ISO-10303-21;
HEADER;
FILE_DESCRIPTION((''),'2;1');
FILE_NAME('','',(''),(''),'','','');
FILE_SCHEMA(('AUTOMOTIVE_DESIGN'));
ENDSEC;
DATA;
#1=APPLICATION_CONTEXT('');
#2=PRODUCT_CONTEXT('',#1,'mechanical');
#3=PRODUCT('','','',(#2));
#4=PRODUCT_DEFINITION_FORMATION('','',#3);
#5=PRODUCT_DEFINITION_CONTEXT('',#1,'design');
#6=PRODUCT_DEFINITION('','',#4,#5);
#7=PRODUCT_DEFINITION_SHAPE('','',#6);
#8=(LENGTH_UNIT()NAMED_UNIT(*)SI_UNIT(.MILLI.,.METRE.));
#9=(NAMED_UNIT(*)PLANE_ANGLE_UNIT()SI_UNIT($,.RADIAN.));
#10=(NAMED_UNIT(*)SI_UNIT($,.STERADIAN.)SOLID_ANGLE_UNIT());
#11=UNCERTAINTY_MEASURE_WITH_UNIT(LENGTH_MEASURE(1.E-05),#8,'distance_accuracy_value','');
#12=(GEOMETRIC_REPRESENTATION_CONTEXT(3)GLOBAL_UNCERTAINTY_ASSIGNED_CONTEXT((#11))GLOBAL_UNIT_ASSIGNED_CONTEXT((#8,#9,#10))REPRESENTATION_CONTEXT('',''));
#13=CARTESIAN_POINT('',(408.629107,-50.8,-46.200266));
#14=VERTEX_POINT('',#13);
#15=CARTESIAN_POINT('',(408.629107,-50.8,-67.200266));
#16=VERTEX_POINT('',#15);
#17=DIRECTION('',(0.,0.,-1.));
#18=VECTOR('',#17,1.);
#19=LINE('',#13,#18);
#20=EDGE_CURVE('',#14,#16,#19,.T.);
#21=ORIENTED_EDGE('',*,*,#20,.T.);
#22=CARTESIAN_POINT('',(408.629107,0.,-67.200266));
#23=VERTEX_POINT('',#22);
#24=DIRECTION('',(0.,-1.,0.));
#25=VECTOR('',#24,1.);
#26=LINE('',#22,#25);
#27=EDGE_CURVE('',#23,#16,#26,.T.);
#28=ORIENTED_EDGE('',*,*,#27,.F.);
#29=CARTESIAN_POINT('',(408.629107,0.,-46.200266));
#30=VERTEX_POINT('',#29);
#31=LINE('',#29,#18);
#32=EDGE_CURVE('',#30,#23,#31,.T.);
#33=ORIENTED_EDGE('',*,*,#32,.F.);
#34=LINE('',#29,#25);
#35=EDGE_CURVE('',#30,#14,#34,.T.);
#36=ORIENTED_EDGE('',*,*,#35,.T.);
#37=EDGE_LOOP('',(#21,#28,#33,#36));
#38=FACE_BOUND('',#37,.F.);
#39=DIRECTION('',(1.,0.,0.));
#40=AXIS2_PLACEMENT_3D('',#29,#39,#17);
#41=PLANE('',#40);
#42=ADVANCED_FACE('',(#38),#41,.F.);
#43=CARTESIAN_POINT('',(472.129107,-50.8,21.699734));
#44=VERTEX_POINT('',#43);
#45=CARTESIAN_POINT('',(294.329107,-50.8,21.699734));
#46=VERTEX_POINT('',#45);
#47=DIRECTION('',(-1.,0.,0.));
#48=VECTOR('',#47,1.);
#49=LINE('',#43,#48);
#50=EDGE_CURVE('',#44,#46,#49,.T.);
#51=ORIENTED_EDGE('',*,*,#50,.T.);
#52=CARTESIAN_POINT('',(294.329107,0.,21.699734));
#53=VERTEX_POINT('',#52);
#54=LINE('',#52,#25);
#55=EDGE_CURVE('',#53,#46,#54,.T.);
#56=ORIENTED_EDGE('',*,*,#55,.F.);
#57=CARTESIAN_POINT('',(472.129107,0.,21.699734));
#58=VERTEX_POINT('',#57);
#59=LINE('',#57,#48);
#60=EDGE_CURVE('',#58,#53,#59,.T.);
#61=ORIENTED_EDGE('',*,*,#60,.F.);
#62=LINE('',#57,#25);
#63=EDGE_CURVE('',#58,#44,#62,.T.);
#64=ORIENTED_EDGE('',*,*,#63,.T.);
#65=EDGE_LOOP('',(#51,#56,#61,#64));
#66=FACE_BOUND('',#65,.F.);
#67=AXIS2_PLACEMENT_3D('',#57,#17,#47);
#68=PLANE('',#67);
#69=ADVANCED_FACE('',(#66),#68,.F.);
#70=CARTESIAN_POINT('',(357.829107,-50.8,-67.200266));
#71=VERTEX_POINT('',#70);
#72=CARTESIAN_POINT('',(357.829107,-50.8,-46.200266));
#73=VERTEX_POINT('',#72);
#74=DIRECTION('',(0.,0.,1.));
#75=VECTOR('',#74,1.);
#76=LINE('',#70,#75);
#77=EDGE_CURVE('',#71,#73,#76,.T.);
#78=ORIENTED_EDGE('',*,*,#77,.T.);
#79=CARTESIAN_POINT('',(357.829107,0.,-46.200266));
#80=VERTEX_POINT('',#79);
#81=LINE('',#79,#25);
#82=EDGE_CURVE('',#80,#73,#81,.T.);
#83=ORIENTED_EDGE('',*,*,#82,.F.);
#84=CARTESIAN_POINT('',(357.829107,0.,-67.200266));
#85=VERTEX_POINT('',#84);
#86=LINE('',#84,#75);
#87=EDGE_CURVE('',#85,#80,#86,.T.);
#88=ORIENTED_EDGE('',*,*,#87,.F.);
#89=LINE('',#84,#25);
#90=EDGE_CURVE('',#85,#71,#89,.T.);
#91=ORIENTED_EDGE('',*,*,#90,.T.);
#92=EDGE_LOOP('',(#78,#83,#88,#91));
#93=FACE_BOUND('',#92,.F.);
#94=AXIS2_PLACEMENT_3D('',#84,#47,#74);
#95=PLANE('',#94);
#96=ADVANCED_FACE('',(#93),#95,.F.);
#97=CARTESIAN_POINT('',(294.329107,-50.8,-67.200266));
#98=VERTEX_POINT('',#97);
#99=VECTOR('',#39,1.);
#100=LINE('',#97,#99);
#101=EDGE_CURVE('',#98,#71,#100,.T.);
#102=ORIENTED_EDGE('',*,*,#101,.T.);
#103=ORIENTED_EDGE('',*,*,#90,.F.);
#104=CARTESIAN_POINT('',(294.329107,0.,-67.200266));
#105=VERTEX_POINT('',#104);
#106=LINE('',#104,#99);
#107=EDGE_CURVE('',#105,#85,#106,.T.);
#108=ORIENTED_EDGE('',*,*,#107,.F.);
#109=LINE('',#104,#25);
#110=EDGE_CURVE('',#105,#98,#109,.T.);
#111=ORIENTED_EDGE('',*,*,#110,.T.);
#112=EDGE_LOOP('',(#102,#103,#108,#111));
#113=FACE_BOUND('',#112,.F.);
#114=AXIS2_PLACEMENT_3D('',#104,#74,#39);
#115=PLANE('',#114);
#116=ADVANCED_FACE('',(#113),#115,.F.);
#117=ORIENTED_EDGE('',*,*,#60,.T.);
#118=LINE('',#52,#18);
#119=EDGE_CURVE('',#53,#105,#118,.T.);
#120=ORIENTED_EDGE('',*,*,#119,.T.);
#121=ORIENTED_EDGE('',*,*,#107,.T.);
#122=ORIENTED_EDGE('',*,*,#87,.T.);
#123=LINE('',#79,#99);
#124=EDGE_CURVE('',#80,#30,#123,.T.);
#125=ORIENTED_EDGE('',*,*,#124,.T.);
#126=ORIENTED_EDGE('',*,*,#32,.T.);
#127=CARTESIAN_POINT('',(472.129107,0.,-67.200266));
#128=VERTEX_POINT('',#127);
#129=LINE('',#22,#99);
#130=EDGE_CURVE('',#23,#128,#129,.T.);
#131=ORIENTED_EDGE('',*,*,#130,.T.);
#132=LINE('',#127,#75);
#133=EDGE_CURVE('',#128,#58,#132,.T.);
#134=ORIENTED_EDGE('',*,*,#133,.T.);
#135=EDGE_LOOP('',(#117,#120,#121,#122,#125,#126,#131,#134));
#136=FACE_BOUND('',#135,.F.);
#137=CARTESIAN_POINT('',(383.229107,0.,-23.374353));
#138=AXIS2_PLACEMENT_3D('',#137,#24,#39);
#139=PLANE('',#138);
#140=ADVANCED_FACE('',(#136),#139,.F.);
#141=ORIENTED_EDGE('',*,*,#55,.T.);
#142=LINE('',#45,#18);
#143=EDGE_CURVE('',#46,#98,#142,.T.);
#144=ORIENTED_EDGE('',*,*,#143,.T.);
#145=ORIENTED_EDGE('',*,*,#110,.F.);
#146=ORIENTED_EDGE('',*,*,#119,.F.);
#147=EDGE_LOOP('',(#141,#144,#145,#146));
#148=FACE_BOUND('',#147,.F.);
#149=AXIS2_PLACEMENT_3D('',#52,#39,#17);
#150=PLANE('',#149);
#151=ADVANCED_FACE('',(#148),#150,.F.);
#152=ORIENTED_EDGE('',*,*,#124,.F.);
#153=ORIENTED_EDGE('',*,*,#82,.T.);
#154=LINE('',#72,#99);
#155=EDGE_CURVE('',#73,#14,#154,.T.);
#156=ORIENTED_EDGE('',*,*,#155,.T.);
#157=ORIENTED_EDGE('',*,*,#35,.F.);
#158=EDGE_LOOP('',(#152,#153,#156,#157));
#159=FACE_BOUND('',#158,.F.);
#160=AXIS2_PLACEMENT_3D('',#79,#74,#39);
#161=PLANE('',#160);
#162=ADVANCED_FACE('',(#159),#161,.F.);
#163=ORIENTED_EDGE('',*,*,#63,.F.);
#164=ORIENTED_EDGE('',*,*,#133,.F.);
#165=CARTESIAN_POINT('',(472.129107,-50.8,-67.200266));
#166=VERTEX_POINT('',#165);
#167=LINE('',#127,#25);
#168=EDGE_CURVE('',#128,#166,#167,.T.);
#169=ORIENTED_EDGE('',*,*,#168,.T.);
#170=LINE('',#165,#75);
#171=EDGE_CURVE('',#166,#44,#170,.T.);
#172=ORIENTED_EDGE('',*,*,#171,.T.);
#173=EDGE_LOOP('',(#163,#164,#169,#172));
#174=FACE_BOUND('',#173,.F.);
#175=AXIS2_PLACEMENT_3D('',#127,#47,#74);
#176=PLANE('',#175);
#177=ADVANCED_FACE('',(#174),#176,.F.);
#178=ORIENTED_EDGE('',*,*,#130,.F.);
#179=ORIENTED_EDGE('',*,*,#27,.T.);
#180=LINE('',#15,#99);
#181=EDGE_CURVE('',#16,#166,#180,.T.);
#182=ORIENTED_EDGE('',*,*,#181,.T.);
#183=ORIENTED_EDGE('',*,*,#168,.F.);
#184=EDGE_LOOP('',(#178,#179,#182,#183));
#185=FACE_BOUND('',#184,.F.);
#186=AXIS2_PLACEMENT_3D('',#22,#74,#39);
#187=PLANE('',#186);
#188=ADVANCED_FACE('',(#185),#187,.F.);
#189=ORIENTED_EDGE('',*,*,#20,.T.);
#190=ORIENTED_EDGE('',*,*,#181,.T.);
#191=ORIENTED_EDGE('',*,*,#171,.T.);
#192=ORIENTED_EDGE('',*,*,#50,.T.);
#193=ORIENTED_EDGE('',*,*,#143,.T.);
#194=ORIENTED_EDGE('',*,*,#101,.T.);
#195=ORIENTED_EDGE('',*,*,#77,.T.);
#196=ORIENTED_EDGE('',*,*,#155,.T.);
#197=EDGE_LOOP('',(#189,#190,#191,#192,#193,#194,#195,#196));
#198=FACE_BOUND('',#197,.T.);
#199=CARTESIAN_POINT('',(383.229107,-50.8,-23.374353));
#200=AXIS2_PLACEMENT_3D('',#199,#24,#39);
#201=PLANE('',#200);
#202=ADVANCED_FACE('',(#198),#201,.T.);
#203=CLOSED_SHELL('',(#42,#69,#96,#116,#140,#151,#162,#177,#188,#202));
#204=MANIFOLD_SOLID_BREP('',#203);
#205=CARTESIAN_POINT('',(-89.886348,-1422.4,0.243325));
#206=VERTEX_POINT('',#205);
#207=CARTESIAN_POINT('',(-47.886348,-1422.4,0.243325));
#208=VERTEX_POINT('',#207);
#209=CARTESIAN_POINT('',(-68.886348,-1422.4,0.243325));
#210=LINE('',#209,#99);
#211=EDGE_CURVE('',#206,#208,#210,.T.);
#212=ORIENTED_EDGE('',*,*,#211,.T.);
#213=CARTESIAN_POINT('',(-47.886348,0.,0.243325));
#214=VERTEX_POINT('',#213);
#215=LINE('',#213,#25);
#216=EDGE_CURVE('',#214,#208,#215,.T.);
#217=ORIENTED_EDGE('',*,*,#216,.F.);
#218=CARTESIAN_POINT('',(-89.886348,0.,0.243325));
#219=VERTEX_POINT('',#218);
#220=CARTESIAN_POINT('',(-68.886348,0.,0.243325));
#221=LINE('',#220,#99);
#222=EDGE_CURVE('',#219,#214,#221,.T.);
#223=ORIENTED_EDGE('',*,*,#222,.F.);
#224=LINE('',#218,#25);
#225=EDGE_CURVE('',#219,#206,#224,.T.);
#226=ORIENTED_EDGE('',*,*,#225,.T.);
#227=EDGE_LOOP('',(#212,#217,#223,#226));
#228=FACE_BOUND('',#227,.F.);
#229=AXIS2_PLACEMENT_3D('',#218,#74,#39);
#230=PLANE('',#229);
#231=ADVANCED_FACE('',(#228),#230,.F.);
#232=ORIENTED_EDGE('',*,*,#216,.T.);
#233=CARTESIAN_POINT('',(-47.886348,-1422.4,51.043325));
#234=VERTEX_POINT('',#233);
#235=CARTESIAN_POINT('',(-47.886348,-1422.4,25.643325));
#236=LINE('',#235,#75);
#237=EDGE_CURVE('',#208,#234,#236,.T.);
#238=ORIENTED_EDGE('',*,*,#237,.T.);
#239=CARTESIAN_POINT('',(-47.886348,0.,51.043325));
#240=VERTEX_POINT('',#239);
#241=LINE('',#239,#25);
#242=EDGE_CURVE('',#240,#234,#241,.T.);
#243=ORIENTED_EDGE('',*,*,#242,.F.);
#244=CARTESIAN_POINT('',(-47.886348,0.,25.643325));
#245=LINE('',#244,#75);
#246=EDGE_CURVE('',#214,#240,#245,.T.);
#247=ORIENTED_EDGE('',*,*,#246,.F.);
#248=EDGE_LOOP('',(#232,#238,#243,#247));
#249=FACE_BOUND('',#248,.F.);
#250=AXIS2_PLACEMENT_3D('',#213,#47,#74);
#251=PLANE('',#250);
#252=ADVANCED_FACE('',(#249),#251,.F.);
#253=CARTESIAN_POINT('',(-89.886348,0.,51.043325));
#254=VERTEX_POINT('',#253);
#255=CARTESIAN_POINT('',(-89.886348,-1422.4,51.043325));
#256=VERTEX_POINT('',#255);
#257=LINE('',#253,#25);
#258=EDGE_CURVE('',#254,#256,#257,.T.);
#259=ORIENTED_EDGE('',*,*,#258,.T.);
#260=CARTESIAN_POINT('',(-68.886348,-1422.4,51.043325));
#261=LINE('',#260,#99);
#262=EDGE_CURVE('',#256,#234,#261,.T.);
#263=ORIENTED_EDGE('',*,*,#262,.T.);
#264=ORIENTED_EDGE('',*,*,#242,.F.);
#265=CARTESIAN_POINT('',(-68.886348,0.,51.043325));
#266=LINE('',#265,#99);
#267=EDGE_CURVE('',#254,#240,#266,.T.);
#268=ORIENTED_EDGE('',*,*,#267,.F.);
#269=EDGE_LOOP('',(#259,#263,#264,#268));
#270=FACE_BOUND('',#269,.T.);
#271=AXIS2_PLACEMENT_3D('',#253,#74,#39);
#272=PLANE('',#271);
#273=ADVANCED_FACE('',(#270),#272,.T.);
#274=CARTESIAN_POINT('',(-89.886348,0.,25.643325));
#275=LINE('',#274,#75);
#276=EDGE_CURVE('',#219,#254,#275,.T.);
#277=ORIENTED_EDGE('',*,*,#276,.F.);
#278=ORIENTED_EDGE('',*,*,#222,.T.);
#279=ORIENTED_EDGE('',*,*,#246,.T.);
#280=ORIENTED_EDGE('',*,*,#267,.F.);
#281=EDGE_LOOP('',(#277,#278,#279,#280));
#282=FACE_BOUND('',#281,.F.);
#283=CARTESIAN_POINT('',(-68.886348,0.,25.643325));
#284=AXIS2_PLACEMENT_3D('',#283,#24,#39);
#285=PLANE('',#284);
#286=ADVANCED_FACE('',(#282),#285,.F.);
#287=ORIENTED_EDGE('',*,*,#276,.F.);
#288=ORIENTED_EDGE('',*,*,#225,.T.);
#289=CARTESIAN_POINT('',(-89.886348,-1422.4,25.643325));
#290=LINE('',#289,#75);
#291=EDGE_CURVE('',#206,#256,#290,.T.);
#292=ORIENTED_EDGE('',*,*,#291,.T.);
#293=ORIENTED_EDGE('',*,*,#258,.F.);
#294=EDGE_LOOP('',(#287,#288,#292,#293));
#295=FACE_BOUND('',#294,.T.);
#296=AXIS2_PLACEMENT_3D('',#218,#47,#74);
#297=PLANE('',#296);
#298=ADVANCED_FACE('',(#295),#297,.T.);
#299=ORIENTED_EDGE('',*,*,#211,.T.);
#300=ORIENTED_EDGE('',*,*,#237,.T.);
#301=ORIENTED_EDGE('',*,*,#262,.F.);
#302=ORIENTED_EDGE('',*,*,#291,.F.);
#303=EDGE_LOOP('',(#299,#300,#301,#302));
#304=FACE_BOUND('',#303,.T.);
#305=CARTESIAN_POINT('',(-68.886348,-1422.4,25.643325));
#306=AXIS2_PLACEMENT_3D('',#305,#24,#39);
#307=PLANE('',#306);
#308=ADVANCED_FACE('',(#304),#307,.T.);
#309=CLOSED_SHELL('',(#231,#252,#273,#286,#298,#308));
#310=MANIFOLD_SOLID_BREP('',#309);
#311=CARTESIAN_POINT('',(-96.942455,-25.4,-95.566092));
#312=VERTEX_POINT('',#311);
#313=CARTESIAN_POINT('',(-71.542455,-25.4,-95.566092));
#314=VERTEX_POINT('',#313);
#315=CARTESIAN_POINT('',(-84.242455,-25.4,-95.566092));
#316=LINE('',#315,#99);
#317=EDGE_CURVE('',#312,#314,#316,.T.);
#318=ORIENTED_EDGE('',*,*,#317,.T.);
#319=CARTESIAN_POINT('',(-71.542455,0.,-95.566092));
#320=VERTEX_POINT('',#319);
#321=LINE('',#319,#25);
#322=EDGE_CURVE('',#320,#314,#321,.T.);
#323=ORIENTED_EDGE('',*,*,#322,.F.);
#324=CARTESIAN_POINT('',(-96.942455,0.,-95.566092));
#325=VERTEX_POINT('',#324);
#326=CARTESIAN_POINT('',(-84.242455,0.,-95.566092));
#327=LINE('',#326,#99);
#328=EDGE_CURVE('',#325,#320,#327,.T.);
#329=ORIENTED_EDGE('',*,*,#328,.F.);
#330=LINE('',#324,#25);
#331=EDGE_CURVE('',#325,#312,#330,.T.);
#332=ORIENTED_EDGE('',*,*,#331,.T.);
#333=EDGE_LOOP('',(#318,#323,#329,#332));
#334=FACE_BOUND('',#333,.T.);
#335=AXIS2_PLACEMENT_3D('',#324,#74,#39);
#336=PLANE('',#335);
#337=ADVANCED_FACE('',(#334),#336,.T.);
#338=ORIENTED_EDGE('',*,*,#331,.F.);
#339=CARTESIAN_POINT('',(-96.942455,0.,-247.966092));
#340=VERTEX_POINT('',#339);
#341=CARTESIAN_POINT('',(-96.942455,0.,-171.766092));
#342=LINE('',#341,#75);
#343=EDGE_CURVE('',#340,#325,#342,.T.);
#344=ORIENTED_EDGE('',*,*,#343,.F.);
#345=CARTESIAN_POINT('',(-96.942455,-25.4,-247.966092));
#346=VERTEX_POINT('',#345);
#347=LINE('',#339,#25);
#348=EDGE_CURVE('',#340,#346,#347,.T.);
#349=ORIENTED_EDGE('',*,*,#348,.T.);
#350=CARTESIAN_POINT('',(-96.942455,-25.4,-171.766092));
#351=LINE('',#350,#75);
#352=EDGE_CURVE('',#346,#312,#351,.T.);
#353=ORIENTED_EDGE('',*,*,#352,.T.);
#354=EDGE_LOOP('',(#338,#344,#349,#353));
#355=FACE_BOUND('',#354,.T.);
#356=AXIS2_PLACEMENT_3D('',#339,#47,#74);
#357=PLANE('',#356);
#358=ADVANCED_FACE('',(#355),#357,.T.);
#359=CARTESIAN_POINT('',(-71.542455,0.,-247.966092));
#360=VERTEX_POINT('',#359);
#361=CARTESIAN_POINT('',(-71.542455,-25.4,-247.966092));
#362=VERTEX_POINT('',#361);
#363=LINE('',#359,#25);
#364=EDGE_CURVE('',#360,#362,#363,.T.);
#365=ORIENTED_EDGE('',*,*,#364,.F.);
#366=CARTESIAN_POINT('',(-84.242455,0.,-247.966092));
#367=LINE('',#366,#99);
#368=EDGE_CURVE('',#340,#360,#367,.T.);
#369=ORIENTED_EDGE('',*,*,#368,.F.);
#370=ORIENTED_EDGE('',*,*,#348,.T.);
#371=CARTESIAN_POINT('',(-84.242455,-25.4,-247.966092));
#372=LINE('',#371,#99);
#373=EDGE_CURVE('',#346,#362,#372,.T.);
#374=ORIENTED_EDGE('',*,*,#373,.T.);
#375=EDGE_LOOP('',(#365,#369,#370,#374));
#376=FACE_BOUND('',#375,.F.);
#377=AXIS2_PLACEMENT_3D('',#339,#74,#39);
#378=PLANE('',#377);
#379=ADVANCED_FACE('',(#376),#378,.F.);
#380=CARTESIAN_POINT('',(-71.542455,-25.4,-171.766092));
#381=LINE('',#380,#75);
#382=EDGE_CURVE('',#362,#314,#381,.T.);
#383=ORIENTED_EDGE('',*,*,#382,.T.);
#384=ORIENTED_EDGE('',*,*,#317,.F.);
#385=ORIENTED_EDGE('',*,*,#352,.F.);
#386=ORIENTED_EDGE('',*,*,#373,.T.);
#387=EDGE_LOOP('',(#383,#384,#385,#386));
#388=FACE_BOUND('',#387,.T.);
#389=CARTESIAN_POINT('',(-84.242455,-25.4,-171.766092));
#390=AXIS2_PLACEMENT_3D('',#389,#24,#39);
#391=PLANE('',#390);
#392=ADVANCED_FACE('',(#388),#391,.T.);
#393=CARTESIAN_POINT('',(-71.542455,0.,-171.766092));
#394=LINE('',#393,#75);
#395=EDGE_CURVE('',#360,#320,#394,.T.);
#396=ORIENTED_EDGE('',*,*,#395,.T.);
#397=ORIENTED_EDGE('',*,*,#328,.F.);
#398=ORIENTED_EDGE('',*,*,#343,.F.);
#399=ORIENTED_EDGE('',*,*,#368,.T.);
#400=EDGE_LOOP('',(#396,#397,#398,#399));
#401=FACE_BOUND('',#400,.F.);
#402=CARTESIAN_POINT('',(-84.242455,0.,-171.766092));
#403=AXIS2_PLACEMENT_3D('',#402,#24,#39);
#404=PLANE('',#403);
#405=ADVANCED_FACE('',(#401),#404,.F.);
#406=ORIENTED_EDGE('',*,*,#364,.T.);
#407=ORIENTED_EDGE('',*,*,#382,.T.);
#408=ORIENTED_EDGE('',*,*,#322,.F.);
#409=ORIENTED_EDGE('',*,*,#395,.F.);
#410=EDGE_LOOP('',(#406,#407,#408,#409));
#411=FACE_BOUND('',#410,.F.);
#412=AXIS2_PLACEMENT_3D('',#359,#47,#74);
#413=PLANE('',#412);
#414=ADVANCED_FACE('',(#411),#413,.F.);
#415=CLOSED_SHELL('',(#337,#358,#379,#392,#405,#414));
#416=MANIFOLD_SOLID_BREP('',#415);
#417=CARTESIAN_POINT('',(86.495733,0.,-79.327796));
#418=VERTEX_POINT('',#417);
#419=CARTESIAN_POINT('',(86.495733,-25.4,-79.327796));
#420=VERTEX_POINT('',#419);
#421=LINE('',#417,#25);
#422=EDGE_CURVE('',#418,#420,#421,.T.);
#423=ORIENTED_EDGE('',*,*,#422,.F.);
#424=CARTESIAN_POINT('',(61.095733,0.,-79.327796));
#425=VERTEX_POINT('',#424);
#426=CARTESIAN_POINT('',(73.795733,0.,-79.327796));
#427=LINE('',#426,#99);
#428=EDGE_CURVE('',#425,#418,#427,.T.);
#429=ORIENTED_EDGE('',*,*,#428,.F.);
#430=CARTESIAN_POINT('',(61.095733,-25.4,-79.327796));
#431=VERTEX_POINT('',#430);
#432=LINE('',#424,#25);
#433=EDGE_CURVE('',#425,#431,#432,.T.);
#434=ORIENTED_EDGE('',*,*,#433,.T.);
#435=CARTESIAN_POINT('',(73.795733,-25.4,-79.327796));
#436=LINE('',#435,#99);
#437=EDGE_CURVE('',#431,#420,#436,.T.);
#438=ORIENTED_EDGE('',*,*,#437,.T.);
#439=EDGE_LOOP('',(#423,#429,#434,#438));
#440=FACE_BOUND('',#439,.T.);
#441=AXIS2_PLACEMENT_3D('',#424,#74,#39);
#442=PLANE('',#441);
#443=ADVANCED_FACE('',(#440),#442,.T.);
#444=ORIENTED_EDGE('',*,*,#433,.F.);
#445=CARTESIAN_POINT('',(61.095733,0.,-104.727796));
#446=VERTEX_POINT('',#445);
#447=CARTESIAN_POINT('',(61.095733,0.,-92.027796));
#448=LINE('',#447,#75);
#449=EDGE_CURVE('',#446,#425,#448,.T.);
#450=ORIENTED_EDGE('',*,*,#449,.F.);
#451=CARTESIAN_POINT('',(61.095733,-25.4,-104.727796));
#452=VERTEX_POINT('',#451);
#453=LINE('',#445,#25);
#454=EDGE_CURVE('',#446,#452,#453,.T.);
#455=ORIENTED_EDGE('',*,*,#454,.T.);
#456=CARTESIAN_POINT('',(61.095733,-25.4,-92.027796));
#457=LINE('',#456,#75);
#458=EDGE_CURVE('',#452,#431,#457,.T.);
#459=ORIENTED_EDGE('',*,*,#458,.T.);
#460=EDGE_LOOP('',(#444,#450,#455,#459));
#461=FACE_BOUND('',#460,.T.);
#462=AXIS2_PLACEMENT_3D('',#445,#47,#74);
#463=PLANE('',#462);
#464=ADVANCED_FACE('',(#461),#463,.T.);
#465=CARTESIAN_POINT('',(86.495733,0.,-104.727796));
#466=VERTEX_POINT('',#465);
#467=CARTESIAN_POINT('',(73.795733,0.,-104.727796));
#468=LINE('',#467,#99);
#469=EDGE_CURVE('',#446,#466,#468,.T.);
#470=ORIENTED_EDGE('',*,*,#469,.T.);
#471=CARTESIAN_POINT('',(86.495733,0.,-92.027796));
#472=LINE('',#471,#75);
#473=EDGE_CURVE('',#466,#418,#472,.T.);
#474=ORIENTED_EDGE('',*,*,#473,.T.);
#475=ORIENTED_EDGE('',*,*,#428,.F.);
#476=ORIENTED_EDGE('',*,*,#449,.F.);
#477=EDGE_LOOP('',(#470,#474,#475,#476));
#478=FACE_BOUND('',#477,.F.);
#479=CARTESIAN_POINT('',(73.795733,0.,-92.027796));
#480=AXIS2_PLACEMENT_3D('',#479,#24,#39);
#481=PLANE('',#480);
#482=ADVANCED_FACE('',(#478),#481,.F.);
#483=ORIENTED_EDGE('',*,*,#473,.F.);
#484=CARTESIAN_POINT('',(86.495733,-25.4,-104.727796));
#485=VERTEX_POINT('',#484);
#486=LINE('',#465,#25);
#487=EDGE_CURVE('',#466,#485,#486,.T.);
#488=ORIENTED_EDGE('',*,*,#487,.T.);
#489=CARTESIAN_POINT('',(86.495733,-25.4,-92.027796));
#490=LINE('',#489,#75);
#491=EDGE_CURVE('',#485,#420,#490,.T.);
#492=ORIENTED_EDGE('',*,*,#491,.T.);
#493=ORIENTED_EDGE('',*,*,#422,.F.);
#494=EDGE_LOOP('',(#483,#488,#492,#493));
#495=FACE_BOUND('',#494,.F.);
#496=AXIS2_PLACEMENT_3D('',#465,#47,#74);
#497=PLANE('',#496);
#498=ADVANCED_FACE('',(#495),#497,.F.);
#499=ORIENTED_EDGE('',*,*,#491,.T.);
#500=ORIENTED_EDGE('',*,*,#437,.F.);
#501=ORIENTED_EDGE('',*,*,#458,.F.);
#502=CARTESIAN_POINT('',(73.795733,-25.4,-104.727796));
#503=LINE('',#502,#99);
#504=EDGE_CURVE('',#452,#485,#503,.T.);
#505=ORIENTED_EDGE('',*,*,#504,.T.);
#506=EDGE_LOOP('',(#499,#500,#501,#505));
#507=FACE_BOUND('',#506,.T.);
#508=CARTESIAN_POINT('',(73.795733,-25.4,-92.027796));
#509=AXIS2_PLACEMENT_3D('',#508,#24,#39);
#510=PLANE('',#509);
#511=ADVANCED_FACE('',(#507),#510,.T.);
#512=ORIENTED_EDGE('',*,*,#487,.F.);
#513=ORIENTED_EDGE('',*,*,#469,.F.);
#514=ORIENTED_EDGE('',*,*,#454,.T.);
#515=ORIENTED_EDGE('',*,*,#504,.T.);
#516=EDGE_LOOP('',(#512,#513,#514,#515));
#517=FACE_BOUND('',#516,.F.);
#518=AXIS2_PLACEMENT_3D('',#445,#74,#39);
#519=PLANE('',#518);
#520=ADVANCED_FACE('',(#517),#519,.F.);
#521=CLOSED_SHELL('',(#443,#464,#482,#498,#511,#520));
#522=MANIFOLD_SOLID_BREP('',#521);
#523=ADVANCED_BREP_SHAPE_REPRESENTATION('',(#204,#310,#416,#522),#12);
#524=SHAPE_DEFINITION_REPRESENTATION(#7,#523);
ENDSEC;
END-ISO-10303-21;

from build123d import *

# Parameters (mm, degrees)
F1_DEPTH = 50.8
F0_W     = 42
F0_H     = 50.8
F2_DEPTH = 1422.4
F0_W_2   = 25.4
F0_H_2   = 25.4
F3_DEPTH = 25.4
F0_H_3   = 152.4


# Not quite as in the source:
# - a feature names something its author has since deleted; it is built from what else it names


with BuildPart() as f1:
    # F0 (on Front) → F1 (new body)
    with BuildSketch(Plane.XZ):
        Polygon((472.1291068077, 21.6997341752), (294.3291068077, 21.6997341752), (294.3291068077, -67.2002658248), (357.8291068077, -67.2002658248), (357.8291068077, -46.2002658248), (408.6291068077, -46.2002658248), (408.6291068077, -67.2002658248), (472.1291068077, -67.2002658248), align=None)
    extrude(amount=F1_DEPTH)


with BuildPart() as f2:
    # F0 (on Front) → F2 (new body)
    with BuildSketch(Plane.XZ):
        with Locations((-68.8863479115, 25.6433247801)):
            Rectangle(F0_W, F0_H)
    extrude(amount=F2_DEPTH)


with BuildPart() as f3:
    # F0 (on Front) → F3 (new body)
    with BuildSketch(Plane.XZ):
        with Locations((73.7957331955, -92.0277962789)):
            Rectangle(F0_W_2, F0_H_2)
    extrude(amount=F3_DEPTH)


with BuildPart() as f3b:
    # F0 (on Front) → F3, piece 2 (new body)
    with BuildSketch(Plane.XZ):
        with Locations((-84.2424545765, -171.7660920799)):
            Rectangle(F0_W_2, F0_H_3)
    extrude(amount=F3_DEPTH)


solid = Compound([f1.part, f2.part, f3.part, f3b.part])
